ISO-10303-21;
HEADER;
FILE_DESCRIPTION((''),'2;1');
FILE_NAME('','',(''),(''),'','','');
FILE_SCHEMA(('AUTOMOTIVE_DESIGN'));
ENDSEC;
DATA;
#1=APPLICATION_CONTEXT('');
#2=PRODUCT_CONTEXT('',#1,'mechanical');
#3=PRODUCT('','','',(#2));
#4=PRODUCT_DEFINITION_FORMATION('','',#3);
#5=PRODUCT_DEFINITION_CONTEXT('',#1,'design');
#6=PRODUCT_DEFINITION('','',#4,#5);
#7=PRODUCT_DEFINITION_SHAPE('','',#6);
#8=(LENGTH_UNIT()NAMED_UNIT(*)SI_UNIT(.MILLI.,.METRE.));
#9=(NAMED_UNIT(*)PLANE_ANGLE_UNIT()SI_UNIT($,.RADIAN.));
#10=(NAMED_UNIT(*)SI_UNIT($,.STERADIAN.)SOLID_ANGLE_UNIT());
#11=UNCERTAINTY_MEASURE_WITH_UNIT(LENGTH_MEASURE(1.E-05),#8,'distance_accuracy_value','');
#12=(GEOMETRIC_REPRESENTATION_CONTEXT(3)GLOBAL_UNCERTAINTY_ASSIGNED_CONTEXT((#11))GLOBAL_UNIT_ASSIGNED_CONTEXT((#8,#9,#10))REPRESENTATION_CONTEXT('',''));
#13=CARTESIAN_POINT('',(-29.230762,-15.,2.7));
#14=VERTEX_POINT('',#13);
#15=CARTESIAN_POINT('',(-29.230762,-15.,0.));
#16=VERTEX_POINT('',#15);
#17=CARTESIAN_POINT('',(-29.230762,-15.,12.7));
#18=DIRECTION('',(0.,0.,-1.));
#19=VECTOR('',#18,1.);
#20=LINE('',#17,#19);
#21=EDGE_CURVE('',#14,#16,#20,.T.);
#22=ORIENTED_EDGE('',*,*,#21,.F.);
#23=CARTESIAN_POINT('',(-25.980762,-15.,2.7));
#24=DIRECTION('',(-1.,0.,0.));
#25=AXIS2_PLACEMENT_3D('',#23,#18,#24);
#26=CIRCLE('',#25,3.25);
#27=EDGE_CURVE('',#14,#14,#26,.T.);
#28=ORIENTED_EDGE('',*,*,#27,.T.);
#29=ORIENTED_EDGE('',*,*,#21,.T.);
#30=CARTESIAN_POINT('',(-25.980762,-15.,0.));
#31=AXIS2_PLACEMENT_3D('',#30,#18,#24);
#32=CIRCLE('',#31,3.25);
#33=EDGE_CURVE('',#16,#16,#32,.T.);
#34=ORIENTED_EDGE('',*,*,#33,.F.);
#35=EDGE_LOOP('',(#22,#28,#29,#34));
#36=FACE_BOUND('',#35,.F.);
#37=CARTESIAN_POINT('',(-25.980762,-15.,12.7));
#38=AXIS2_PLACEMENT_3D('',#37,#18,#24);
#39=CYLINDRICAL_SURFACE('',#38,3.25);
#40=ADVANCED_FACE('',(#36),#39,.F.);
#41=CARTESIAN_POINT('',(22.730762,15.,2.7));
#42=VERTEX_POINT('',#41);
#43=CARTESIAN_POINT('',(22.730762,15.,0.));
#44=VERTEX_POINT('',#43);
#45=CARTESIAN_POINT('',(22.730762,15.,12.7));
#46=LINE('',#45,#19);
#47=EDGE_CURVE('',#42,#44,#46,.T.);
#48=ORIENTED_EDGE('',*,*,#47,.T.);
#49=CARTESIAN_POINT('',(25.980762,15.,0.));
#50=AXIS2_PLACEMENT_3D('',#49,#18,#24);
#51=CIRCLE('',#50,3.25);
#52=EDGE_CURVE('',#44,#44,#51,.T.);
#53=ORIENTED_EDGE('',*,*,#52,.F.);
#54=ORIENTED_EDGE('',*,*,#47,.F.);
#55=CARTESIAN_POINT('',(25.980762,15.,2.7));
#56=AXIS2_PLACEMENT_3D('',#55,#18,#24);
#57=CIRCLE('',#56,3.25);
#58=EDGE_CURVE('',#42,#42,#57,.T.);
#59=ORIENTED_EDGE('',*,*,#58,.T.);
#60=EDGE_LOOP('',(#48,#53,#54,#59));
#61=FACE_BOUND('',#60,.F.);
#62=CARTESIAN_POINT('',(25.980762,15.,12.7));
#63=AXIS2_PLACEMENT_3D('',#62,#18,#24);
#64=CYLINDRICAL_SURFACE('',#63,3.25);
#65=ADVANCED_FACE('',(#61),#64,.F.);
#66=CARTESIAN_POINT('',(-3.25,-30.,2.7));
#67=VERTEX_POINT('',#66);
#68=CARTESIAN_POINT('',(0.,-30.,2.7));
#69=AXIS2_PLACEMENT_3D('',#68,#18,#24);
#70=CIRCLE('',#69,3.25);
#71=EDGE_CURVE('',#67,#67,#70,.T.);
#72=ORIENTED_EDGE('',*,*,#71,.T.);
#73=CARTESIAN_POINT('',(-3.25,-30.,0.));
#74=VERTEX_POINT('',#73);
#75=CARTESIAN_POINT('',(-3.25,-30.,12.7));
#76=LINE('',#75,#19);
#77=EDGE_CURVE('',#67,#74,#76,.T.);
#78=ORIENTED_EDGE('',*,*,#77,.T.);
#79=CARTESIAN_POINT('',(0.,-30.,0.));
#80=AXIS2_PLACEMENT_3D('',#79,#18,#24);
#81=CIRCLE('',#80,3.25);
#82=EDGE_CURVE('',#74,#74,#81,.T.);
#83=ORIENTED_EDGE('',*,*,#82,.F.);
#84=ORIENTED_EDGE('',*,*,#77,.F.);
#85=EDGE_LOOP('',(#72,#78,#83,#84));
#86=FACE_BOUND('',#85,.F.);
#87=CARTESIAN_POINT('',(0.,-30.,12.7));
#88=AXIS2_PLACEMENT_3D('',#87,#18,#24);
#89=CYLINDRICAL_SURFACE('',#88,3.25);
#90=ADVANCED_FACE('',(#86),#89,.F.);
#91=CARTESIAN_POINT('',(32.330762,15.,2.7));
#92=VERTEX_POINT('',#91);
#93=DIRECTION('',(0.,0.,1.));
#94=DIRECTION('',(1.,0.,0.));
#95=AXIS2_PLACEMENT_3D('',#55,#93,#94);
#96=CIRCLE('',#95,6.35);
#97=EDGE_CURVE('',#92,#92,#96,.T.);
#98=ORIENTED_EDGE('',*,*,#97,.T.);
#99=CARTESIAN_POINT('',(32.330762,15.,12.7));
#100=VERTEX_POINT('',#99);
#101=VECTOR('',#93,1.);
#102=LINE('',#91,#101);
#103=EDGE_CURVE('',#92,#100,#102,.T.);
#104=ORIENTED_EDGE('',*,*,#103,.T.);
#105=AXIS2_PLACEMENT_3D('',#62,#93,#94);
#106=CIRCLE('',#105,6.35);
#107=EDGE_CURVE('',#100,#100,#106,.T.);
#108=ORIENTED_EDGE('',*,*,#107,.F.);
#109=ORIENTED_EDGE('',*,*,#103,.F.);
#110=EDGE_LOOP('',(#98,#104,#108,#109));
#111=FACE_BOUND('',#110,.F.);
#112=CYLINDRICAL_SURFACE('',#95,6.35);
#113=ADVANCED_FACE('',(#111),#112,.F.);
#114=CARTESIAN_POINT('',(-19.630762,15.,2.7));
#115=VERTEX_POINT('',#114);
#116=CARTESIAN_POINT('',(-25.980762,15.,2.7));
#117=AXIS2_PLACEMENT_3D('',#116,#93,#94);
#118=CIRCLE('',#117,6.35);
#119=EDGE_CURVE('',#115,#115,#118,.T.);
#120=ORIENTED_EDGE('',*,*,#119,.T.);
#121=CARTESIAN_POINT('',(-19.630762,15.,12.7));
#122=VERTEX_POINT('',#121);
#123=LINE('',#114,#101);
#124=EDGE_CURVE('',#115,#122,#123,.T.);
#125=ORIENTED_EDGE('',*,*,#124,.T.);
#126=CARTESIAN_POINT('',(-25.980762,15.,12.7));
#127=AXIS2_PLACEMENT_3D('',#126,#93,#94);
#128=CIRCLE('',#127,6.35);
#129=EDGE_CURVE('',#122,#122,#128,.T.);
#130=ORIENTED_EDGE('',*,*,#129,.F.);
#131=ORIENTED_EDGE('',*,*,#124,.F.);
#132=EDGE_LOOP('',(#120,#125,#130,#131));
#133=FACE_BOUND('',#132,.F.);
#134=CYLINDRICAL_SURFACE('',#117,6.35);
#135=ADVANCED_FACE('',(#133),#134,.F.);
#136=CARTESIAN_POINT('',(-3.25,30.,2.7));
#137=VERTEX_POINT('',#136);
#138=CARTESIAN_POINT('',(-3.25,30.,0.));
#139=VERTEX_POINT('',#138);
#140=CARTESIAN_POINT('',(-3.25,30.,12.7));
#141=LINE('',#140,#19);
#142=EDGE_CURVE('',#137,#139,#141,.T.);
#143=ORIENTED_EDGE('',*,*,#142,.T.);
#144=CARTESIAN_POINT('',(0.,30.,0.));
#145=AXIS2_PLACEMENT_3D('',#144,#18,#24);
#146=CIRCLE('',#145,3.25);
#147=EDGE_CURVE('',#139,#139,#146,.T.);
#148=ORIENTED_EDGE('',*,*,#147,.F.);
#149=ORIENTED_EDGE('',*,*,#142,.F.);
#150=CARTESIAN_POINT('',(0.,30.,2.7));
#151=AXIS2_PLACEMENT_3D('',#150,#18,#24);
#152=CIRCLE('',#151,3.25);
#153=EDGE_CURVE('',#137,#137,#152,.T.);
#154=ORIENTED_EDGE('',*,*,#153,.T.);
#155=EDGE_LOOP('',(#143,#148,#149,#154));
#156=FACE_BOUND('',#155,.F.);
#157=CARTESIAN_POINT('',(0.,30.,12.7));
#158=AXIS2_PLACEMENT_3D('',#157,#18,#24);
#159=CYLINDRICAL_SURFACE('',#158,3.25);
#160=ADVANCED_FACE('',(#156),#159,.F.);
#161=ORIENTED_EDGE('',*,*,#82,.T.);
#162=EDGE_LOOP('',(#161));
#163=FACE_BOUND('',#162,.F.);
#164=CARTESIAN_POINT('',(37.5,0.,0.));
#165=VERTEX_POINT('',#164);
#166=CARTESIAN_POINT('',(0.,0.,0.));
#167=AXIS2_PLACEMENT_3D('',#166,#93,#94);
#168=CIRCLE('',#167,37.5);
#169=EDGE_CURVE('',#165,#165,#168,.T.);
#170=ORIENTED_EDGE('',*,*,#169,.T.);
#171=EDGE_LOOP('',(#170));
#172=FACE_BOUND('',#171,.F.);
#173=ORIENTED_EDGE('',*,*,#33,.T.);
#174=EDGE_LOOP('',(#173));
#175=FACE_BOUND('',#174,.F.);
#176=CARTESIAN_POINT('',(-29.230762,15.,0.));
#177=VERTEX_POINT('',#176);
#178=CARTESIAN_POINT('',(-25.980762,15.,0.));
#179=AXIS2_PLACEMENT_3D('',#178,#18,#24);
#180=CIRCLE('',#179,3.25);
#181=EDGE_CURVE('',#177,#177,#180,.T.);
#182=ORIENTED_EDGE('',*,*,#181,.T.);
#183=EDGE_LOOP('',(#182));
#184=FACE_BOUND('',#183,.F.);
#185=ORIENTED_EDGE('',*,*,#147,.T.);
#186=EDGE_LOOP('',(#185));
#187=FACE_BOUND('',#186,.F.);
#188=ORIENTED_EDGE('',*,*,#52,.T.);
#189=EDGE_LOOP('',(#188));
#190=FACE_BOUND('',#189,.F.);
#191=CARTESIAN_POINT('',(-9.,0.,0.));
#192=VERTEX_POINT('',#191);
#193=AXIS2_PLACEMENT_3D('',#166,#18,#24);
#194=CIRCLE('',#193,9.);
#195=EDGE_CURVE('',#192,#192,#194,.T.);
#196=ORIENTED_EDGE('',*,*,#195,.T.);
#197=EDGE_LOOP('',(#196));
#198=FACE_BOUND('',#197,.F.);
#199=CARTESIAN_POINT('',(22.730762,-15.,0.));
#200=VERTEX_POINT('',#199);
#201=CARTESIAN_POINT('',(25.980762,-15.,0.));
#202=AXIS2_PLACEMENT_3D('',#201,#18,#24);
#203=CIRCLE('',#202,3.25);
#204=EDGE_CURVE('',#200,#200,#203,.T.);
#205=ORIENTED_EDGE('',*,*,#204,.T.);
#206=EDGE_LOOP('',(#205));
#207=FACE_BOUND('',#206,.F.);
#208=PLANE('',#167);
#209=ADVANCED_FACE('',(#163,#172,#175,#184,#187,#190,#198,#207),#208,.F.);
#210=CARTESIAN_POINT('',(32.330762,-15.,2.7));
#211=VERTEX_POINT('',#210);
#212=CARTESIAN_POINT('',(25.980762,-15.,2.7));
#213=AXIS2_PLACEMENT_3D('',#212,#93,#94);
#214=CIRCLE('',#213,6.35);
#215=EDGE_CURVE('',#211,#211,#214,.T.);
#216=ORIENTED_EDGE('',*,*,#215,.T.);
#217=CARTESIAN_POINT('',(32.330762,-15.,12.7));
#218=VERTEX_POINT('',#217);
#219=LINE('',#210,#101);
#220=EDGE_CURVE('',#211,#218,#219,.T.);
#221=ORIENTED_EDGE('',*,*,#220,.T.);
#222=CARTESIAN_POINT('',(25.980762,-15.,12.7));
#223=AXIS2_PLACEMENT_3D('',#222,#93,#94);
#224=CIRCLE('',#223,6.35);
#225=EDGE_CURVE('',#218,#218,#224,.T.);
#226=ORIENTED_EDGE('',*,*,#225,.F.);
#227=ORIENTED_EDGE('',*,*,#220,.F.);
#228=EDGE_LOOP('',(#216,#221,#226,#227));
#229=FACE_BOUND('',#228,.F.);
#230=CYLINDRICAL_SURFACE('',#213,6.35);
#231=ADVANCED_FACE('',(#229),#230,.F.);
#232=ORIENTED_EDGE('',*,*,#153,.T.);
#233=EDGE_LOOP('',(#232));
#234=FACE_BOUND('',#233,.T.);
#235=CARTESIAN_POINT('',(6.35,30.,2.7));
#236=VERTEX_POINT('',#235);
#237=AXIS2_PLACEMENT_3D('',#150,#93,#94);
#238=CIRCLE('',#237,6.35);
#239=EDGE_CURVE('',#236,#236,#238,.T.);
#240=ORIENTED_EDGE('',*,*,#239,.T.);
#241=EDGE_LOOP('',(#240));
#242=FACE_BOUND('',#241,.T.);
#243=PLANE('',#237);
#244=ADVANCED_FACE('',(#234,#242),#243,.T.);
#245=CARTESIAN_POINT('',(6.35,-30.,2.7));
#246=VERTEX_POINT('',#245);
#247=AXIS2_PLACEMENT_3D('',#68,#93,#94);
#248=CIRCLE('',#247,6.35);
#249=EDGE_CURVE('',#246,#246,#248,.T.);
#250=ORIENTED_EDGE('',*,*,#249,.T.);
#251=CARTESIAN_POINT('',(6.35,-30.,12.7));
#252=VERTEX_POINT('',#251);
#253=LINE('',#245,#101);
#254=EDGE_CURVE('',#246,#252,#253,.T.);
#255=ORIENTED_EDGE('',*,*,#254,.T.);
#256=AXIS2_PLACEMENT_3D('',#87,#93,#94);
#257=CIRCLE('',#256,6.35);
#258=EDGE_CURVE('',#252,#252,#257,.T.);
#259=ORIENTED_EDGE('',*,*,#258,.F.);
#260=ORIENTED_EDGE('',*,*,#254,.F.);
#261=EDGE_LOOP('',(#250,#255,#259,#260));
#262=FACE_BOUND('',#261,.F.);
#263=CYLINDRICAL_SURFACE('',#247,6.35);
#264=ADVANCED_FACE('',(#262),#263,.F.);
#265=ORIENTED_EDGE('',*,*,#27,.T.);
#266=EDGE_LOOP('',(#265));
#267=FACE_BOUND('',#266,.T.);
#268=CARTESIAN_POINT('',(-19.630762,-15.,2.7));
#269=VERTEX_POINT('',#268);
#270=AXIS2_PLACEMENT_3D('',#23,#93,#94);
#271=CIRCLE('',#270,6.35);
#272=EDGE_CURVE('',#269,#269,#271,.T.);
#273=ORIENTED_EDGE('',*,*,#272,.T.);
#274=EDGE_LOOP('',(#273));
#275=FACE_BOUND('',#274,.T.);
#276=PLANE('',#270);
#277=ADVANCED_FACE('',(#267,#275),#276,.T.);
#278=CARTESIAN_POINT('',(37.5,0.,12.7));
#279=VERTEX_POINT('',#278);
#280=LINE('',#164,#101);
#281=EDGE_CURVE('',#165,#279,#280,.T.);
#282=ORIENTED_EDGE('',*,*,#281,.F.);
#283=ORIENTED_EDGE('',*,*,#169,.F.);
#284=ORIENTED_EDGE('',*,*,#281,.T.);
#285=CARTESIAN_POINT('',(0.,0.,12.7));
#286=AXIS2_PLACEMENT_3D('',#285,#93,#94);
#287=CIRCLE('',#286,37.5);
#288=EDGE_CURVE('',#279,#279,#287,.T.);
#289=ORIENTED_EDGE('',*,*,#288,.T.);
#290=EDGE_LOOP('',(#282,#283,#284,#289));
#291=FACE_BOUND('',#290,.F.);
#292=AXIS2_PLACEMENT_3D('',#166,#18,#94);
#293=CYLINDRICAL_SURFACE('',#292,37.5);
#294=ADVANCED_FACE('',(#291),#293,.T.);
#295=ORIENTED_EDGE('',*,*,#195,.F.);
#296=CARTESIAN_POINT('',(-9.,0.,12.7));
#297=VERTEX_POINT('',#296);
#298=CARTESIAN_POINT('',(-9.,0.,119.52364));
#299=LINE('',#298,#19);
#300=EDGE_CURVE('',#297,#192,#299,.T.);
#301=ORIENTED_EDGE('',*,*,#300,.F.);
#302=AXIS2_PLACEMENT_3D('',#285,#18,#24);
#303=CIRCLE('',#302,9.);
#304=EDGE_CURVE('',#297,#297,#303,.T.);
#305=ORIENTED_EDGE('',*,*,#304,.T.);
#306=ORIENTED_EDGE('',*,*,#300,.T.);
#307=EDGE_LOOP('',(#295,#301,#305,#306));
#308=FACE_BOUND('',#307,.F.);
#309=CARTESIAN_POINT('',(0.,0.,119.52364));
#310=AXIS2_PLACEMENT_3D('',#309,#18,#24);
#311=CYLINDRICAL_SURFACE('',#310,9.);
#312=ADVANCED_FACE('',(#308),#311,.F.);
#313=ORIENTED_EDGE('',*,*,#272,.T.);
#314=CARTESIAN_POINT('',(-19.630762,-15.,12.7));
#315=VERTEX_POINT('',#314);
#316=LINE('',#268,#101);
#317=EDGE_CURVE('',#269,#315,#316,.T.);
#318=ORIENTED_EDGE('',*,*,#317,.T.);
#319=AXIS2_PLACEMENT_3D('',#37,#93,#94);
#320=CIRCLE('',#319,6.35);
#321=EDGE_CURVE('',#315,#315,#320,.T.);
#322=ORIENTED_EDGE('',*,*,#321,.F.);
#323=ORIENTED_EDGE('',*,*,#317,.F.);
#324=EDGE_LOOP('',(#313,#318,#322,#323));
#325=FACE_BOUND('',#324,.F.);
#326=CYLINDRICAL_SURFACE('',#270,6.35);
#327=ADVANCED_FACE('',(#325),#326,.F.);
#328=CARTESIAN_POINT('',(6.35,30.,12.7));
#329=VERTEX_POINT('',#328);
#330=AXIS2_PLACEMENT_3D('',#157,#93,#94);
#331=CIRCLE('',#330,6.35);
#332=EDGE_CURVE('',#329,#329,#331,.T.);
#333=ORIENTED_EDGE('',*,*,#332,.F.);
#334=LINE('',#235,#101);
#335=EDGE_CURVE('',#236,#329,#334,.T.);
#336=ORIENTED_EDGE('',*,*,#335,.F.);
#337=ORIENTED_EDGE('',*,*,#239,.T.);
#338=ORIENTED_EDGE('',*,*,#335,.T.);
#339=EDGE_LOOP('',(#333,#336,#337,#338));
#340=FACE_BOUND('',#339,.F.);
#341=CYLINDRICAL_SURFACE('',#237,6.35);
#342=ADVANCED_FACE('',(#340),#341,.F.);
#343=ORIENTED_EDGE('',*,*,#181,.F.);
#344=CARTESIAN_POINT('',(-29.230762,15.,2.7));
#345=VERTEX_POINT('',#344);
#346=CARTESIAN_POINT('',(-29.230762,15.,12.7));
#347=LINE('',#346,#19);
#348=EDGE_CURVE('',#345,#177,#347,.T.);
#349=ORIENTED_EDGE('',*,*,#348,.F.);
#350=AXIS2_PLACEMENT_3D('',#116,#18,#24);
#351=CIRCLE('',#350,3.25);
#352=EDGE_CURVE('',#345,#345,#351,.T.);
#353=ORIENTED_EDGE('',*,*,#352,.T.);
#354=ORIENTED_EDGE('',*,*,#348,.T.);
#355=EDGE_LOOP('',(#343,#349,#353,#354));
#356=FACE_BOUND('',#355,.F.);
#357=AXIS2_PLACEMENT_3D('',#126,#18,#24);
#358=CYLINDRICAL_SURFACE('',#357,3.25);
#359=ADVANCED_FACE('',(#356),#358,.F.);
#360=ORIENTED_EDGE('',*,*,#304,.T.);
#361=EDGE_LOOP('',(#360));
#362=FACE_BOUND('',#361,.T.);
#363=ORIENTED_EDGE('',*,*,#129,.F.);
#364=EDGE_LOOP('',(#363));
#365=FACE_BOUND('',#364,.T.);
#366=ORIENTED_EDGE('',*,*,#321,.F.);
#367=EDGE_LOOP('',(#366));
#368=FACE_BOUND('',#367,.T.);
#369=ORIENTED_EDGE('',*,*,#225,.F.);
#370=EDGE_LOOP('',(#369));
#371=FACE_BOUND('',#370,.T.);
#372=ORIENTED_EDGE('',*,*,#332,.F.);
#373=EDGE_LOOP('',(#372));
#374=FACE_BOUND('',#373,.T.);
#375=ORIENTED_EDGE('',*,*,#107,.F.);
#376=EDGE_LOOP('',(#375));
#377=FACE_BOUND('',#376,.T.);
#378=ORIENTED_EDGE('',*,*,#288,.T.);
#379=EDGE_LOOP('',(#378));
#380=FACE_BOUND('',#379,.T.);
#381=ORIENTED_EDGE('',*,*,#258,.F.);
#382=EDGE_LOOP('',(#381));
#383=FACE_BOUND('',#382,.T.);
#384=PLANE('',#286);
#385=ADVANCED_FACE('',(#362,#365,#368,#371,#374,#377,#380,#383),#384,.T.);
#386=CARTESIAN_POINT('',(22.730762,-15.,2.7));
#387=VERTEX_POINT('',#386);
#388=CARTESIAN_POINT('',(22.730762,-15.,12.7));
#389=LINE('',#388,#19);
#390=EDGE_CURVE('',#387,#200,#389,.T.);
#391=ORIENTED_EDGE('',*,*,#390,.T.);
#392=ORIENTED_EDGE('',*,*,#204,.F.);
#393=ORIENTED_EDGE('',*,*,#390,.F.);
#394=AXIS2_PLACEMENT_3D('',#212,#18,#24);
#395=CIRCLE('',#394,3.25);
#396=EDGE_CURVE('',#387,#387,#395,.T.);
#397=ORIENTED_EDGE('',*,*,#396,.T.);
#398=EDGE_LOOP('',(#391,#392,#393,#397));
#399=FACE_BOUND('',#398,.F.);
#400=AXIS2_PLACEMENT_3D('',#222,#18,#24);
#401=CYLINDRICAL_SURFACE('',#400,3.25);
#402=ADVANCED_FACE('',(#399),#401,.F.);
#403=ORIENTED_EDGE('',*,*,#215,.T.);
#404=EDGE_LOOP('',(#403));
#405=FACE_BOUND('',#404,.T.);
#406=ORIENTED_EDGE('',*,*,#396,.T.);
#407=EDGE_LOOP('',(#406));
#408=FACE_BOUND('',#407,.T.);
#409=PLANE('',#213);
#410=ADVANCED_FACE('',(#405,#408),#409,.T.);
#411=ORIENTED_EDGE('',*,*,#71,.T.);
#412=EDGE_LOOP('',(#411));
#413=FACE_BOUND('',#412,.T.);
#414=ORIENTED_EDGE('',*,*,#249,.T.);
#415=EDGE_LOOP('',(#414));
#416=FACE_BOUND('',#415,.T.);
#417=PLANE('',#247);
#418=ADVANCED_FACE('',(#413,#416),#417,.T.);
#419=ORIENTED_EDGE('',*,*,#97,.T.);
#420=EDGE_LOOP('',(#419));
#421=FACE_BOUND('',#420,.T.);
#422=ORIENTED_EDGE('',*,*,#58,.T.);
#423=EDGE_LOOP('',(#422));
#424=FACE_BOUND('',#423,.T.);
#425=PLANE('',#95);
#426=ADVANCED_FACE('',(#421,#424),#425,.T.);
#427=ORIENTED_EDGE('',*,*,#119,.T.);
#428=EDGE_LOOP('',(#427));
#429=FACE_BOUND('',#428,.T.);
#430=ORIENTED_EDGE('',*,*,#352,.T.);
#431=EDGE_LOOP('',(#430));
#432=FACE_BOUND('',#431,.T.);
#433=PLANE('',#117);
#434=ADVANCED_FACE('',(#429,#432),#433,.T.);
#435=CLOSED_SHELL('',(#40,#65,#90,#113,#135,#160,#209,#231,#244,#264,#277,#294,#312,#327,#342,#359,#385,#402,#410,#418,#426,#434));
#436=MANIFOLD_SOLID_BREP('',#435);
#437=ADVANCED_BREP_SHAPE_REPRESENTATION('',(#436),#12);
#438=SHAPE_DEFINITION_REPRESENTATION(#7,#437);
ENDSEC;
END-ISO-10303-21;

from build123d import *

# Parameters (mm, degrees)
F0_R           = 37.5
F1_DEPTH       = 12.7
F3_D           = 18
F5_D           = 6.5
F5_CBORE_D     = 12.7
F5_CBORE_DEPTH = 10


# Not quite as in the source:
# - a length typed as a fraction of an inch, garbled in the dataset ("3 / 203.2 mm" for 3/8 in), is restored


with BuildPart() as f1:
    # F0 (on Top) → F1 (new body)
    with BuildSketch(Plane.XY):
        Circle(F0_R)
    extrude(amount=F1_DEPTH)

    # F3 (through all)
    with Locations(Plane.XY.offset(12.7)):
        with Locations((0, 0)):
            Hole(F3_D / 2)

    # F5 (through all)
    with Locations(Plane.XY.offset(12.7)):
        with Locations((0, 30), (25.9807621135, 15), (25.9807621135, -15), (0, -30), (-25.9807621135, -15), (-25.9807621135, 15)):
            CounterBoreHole(F5_D / 2, F5_CBORE_D / 2, F5_CBORE_DEPTH)


solid = f1.part
